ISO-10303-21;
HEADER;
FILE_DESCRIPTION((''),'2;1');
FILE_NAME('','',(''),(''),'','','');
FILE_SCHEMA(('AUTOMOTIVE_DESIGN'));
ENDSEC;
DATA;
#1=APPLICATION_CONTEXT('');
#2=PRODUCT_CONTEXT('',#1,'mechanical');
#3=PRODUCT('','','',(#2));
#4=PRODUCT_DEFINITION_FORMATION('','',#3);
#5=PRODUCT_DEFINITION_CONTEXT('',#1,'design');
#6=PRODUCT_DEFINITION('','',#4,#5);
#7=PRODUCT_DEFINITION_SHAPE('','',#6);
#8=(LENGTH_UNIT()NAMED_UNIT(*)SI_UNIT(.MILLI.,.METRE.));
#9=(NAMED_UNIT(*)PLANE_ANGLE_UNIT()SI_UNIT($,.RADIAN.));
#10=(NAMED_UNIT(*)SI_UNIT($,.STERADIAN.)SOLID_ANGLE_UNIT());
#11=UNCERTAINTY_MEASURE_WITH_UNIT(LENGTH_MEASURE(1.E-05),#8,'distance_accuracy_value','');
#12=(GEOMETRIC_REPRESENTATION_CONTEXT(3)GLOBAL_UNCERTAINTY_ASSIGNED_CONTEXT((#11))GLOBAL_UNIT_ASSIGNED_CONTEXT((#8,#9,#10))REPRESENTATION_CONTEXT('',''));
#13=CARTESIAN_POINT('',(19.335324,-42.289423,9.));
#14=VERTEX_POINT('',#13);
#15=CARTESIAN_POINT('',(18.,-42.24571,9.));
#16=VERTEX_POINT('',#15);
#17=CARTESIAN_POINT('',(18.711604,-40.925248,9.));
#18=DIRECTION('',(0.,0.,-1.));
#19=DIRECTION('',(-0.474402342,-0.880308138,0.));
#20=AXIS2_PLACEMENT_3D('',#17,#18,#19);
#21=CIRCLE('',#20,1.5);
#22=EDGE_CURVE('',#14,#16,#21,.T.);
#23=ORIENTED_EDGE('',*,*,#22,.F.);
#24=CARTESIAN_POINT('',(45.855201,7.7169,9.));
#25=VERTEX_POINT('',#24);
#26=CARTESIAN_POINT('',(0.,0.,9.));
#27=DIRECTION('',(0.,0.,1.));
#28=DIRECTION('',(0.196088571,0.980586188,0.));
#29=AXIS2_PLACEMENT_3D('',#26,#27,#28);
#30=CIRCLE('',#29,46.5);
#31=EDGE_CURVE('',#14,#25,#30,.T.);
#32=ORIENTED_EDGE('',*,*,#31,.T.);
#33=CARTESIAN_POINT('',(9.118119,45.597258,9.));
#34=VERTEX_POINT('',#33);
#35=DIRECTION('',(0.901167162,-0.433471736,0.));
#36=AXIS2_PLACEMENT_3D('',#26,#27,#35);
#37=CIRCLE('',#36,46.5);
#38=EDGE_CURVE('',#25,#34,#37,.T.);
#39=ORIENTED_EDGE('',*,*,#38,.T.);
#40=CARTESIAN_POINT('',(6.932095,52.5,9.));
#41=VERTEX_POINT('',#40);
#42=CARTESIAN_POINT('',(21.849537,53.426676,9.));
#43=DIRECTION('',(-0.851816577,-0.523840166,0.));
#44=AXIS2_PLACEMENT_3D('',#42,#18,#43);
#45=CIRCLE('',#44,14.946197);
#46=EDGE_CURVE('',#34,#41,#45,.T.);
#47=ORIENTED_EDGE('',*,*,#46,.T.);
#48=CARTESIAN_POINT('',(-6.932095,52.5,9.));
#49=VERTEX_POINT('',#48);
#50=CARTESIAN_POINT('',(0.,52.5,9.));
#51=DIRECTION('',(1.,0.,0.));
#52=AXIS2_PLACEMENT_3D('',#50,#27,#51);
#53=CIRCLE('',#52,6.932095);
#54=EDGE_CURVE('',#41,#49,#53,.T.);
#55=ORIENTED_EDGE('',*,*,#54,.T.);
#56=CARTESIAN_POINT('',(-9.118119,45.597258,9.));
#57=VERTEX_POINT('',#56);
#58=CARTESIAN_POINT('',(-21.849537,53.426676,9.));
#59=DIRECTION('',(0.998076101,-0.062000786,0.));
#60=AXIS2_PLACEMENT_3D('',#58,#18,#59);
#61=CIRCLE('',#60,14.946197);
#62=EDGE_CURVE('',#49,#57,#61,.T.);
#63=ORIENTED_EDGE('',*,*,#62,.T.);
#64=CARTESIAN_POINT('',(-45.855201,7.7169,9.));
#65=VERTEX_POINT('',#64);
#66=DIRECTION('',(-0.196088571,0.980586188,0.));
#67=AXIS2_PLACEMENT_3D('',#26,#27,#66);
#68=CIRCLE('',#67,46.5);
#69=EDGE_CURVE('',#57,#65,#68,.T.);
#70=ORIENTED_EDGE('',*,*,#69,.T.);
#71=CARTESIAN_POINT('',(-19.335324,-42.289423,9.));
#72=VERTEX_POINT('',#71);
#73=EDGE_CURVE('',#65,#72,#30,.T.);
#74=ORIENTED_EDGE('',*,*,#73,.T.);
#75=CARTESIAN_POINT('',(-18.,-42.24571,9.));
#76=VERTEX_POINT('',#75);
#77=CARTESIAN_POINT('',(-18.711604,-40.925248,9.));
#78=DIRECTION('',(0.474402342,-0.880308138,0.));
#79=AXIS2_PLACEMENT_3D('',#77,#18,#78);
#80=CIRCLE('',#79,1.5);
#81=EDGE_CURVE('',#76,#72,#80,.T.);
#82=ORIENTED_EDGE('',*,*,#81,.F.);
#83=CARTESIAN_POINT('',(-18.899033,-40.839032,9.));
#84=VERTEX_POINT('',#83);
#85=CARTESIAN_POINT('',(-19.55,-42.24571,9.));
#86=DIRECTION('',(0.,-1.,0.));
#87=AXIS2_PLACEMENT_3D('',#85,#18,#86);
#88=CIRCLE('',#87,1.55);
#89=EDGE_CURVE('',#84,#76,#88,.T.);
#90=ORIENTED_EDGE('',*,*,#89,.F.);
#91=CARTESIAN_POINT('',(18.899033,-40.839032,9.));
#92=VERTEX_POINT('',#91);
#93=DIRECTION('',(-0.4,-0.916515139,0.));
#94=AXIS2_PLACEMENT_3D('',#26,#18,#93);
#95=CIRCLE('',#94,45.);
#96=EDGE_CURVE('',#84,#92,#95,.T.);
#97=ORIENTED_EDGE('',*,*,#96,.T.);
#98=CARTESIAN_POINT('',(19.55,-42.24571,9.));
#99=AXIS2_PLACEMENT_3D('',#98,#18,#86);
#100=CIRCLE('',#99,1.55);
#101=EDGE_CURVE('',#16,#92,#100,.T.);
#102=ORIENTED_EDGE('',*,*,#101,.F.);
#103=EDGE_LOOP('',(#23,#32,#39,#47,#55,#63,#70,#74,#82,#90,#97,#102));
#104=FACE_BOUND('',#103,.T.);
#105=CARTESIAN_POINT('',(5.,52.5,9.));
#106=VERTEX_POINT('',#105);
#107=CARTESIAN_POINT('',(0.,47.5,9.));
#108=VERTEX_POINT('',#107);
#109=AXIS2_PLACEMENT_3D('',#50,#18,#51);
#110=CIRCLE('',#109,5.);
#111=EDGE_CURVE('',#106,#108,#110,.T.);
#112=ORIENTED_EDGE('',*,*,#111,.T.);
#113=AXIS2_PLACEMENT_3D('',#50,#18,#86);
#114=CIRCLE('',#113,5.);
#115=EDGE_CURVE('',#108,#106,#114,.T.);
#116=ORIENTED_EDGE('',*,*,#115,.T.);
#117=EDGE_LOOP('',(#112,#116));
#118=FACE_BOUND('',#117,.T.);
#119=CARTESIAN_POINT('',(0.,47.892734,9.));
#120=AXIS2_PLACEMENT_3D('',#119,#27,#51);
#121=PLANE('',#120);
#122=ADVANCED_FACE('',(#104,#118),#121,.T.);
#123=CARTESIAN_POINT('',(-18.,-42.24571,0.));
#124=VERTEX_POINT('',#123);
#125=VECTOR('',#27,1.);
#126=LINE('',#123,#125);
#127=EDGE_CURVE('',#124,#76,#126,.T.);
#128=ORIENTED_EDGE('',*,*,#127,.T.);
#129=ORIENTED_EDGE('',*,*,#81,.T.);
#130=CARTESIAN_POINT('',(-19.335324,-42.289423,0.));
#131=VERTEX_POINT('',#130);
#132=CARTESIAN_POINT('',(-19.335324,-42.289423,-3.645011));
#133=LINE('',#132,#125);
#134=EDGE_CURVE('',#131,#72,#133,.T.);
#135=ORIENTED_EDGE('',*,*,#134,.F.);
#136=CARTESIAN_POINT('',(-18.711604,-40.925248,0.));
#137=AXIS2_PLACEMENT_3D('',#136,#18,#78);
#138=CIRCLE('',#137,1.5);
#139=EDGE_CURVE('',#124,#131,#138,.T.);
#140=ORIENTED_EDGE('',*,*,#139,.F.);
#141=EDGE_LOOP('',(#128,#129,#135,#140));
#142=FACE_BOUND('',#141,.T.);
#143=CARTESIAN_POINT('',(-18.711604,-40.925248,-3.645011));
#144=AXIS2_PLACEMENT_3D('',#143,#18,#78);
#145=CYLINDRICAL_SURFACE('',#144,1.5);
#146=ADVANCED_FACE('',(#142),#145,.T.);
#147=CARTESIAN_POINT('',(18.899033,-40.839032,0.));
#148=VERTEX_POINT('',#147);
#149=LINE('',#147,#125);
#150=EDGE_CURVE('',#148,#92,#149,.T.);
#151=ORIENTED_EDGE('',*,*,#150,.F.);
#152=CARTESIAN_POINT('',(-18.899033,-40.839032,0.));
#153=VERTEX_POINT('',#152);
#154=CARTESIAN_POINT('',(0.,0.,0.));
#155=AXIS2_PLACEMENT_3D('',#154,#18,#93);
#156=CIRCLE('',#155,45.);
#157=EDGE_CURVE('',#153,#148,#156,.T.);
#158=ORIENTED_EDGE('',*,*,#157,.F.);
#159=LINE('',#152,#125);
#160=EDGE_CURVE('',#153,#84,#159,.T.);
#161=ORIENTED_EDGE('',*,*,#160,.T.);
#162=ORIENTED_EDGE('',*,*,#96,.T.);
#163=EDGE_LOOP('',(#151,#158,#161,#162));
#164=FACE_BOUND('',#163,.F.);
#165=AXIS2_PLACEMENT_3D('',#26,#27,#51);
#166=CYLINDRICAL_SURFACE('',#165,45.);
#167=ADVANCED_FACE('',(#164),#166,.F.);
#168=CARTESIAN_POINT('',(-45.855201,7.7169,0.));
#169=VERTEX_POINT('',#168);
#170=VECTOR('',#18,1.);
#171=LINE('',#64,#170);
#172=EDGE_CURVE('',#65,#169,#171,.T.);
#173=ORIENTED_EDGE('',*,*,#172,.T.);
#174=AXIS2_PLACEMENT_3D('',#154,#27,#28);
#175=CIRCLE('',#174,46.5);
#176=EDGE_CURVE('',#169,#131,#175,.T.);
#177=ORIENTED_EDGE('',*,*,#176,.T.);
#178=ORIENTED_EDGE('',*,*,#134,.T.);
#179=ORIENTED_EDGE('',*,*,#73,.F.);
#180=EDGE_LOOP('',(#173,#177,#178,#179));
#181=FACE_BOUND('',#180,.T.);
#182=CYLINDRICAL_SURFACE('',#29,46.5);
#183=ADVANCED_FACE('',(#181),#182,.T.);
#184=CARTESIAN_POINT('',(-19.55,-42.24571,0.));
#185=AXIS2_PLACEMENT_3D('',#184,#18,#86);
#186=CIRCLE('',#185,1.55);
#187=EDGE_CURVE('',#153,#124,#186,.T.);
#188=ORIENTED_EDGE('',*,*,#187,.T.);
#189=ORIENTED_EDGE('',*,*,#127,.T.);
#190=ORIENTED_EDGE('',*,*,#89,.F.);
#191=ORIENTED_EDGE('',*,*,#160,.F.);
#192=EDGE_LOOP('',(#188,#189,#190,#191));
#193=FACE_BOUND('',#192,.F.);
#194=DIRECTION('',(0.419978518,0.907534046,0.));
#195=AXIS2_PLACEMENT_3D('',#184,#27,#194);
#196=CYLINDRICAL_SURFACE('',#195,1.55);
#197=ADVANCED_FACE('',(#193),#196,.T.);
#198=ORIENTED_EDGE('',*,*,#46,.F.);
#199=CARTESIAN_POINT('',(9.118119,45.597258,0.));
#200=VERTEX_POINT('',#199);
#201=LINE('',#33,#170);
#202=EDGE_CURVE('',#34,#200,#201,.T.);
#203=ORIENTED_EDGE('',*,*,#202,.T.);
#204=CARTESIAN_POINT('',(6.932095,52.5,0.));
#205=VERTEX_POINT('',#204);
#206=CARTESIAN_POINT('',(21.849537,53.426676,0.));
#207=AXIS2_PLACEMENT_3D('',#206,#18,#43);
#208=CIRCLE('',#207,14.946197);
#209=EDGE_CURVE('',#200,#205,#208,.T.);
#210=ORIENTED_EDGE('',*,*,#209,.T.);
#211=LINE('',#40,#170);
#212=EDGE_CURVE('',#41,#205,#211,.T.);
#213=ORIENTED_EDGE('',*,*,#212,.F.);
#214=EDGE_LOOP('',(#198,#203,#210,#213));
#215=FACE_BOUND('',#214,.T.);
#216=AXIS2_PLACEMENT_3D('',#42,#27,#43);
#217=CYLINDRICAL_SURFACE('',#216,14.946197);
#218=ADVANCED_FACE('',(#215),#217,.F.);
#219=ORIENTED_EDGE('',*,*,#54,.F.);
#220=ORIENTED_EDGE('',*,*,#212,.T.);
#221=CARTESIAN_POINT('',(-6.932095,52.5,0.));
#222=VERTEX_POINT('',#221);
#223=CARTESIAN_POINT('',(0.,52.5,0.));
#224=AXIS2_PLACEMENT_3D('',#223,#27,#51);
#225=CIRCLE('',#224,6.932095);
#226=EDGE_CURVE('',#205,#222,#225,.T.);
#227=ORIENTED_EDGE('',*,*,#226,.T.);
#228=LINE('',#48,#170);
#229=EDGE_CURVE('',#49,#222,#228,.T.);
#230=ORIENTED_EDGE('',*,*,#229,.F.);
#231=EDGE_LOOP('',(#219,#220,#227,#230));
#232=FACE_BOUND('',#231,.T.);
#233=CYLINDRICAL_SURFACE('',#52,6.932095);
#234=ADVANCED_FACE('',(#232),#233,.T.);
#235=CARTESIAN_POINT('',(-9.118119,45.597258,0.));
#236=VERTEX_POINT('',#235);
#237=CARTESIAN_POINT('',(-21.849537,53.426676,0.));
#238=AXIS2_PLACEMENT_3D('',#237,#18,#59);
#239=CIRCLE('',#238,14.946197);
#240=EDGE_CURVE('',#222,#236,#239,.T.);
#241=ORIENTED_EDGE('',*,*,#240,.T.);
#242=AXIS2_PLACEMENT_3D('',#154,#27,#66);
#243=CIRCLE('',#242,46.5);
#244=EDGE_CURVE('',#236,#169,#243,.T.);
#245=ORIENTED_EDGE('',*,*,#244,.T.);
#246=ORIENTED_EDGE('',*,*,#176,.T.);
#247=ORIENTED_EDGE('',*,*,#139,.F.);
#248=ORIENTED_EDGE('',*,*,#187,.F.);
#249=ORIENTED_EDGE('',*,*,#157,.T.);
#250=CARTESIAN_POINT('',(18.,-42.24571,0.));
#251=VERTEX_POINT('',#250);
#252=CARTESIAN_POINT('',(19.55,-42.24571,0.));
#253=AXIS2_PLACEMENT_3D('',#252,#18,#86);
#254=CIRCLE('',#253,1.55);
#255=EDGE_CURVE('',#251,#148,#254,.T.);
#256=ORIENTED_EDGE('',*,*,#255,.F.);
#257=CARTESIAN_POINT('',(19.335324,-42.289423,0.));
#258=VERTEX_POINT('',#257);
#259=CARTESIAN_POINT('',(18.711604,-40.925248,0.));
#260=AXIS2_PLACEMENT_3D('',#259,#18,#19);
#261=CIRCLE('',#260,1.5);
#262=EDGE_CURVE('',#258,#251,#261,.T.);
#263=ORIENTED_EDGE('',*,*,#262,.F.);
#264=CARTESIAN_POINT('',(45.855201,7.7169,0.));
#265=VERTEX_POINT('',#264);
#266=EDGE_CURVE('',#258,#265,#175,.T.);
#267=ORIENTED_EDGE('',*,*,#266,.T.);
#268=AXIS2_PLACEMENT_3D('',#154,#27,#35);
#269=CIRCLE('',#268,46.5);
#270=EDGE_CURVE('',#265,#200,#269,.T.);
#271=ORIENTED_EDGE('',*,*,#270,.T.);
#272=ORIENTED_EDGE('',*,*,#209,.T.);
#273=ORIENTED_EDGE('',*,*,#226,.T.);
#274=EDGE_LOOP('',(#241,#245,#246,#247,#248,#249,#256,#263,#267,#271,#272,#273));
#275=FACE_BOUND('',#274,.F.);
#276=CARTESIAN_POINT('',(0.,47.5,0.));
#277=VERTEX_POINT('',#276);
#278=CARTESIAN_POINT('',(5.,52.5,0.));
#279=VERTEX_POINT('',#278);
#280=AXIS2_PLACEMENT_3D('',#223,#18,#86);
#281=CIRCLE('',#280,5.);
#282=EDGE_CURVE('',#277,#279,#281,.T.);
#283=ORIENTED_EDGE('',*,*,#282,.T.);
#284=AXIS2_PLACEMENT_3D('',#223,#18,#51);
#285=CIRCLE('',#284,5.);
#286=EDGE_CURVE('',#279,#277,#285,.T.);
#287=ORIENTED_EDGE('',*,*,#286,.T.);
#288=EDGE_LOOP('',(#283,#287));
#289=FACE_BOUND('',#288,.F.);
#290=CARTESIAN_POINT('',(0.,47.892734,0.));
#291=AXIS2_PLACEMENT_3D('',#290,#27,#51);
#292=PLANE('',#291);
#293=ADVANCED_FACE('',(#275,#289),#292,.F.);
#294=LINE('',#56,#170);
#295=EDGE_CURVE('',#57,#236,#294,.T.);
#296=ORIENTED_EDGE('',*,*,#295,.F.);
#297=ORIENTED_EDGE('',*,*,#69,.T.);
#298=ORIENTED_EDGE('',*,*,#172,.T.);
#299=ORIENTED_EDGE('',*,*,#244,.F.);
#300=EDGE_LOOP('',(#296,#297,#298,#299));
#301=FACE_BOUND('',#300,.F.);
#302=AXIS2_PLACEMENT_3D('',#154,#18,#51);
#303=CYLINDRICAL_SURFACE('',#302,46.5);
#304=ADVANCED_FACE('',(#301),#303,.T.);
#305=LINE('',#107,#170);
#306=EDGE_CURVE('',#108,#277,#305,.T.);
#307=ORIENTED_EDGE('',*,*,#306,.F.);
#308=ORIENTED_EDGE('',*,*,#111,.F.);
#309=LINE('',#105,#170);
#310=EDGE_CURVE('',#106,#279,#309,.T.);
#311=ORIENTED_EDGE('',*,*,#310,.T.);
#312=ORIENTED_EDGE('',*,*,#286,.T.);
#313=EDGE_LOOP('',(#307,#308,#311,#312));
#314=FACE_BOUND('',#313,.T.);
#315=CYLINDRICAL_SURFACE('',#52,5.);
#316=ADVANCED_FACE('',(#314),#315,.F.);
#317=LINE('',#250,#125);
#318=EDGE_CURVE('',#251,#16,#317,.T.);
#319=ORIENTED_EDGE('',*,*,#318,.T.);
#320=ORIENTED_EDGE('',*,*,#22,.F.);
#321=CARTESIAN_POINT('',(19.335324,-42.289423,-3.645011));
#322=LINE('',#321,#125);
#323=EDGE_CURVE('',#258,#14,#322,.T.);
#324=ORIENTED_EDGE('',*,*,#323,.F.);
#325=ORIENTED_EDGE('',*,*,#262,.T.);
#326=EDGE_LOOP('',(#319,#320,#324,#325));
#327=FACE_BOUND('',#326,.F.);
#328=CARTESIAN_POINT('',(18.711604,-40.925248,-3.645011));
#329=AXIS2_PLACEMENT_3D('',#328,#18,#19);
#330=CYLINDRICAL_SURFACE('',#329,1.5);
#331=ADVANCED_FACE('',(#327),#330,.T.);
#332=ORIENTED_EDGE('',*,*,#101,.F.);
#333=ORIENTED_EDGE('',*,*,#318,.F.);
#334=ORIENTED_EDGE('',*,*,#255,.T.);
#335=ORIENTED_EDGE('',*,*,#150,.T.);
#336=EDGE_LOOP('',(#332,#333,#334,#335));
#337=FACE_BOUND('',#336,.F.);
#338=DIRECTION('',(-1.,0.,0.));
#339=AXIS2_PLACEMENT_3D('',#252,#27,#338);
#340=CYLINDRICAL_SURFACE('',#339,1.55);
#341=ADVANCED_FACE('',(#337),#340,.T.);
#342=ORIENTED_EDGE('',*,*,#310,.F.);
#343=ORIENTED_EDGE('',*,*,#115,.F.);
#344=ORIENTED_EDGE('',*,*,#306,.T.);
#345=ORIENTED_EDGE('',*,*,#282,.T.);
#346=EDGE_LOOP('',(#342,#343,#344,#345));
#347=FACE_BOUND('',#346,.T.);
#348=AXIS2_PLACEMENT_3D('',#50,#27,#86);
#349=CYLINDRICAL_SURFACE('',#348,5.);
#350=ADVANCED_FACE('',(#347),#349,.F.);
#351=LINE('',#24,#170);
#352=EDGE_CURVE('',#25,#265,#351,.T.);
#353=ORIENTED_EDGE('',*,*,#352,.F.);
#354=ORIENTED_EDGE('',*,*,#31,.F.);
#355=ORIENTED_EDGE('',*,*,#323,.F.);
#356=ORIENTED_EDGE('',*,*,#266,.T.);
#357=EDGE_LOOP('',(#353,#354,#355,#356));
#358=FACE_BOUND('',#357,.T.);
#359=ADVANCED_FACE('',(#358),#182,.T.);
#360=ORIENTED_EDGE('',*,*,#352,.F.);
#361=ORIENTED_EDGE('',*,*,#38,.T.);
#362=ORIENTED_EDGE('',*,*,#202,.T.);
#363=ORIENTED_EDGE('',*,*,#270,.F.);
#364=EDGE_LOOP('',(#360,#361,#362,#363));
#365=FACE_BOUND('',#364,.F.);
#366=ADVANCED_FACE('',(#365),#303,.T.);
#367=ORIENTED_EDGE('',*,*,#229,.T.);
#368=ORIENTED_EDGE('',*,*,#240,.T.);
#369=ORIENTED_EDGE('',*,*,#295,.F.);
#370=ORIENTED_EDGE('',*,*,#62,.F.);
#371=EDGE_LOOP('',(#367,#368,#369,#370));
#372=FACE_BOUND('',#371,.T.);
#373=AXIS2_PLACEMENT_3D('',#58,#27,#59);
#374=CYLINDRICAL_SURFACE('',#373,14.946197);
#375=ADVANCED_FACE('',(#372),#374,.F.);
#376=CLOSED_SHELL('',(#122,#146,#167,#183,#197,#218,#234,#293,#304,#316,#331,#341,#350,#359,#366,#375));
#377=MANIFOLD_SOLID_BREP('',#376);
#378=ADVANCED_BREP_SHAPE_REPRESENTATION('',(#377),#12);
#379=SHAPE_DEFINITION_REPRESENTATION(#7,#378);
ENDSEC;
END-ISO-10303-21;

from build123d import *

# Parameters (mm, degrees)
F0_R         = 46.5
F0_R_2       = 45
F1_DEPTH     = 9
F3_DEPTH     = 25
F5_DEPTH     = 25
F7_DEPTH     = 9
F9_DEPTH     = 9
F11_DEPTH    = 9
F13_DEPTH    = 25
F15_DEPTH    = 25
F16_R        = 45
F17_DEPTH    = 9
F18_R        = 45
F19_DEPTH    = 25
F21_DEPTH    = 25
F22_R        = 1.55
F23_T1_DEPTH = 16.2900218994
F24_T1_DEPTH = 16.2900218994


# Not quite as in the source:
# - a fillet or chamfer that OpenCascade refuses, or shapes differently, is made with other operations: its cross-section is extruded or revolved along the edge and cut away or added


with BuildPart() as f1:
    # F0 (on Top) → F1 (new body)
    with BuildSketch(Plane.XY):
        Circle(F0_R)
        Circle(F0_R_2, mode=Mode.SUBTRACT)
    extrude(amount=F1_DEPTH)

    # F2 (on face) → F3 (cut)
    with BuildSketch(Plane.XY.offset(9)):
        Polygon((64.8135244846, -21.5104352683), (0, -21.5104352683), (-51.5724048018, -21.5104352683), (-51.5724048018, -59.9158406258), (64.033716917, -57.7713772655), align=None)
    extrude(amount=-F3_DEPTH, mode=Mode.SUBTRACT)

    # F4 (on face) → F5 (cut)
    with BuildSketch(Plane.XY.offset(9)):
        with BuildLine():
            ThreePointArc((-40.5525222975, -19.506228116), (-40.9032938672, -20.5072072896), (-41.9042730407, -20.1564357199))
            Line((-41.9042730407, -20.1564357199), (-43.4346050024, -22.7221362293))
            Line((-43.4346050024, -22.7221362293), (-36.3525599241, -23.4547629952))
            Line((-36.3525599241, -23.4547629952), (-40.5525222975, -19.506228116))
        make_face()
        with BuildLine():
            Line((43.4346050024, -22.7221362293), (41.9042730407, -20.1564357199))
            ThreePointArc((41.9042730407, -20.1564357199), (40.9032938672, -20.5072072896), (40.5525222975, -19.506228116))
            Line((40.5525222975, -19.506228116), (36.3525599241, -23.4547629952))
            Line((36.3525599241, -23.4547629952), (43.4346050024, -22.7221362293))
        make_face()
    extrude(amount=-F5_DEPTH, mode=Mode.SUBTRACT)

    # F6 (on face) → F7 (join)
    with BuildSketch(Plane.XY.offset(9)):
        with BuildLine():
            ThreePointArc((6.9320949163, 52.5), (-4.9017313232, 57.4017313232), (0, 45.5679050837))
            ThreePointArc((0, 45.5679050837), (4.9017313232, 47.5982686768), (6.9320949163, 52.5))
        make_face()
        with BuildLine():
            ThreePointArc((5, 52.5), (3.5355339059, 48.9644660941), (0, 47.5))
            ThreePointArc((0, 47.5), (-3.5355339059, 56.0355339059), (5, 52.5))
        make_face(mode=Mode.SUBTRACT)
    extrude(amount=-F7_DEPTH)

    # F8 (on face) → F9 (join)
    with BuildSketch(Plane.XY.offset(9)):
        with BuildLine():
            ThreePointArc((-6.9320949163, 52.5), (-7.6007884485, 48.9142518774), (-9.1181185374, 45.5972577502))
            ThreePointArc((-9.1181185374, 45.5972577502), (0, 45.60976302), (9.1181185374, 45.5972577502))
            ThreePointArc((9.1181185374, 45.5972577502), (7.6007884485, 48.9142518774), (6.9320949163, 52.5))
            ThreePointArc((6.9320949163, 52.5), (0, 47.0015761941), (-6.9320949163, 52.5))
        make_face()
    extrude(amount=-F9_DEPTH)

    # F10 (on face) → F11 (join)
    with BuildSketch(Plane.XY.offset(9)):
        with BuildLine():
            Line((-44.8310511788, 3.895747708), (-46.3451584316, 3.7916078319))
            ThreePointArc((-46.3451584316, 3.7916078319), (-42.7926175487, -9.5215818837), (-33.8443815708, -19.9996847659))
            ThreePointArc((-33.8443815708, -19.9996847659), (-32.8631083129, -20.2138563114), (-32.1503467858, -19.506228116))
            ThreePointArc((-32.1503467858, -19.506228116), (-41.2777702931, -9.315455738), (-44.8310511788, 3.895747708))
        make_face()
        with BuildLine():
            ThreePointArc((33.8443815708, -19.9996847659), (42.7926175487, -9.5215818837), (46.3451584316, 3.7916078319))
            Line((46.3451584316, 3.7916078319), (44.8310511788, 3.895747708))
            ThreePointArc((44.8310511788, 3.895747708), (41.2777702931, -9.315455738), (32.1503467858, -19.506228116))
            ThreePointArc((32.1503467858, -19.506228116), (32.8631083129, -20.2138563114), (33.8443815708, -19.9996847659))
        make_face()
    extrude(amount=-F11_DEPTH)

    # F12 (on face) → F13 (cut)
    with BuildSketch(Plane.XY.offset(9)):
        with BuildLine():
            ThreePointArc((-44.7172397739, -5.0367119241), (-45.830770977, -0.896267065), (-46.3787269492, 3.35614162))
            Line((-46.3787269492, 3.35614162), (-53.9689548314, -20.3920416534))
            Line((-53.9689548314, -20.3920416534), (-39.6306179464, -26.7084874213))
            Line((-39.6306179464, -26.7084874213), (-35.9670780599, -21.9711512327))
            Line((-35.9670780599, -21.9711512327), (-43.2941578329, -10.1593965665))
            Line((-43.2941578329, -10.1593965665), (-44.7172397739, -5.0367119241))
        make_face()
        with BuildLine():
            Line((53.9689548314, -20.3920416534), (46.3787269492, 3.35614162))
            ThreePointArc((46.3787269492, 3.35614162), (45.830770977, -0.896267065), (44.7172397739, -5.0367119241))
            Line((44.7172397739, -5.0367119241), (43.2941578329, -10.1593965665))
            Line((43.2941578329, -10.1593965665), (35.9670780599, -21.9711512327))
            Line((35.9670780599, -21.9711512327), (39.6306179464, -26.7084874213))
            Line((39.6306179464, -26.7084874213), (53.9689548314, -20.3920416534))
        make_face()
    extrude(amount=-F13_DEPTH, mode=Mode.SUBTRACT)

    # F14 (on face) → F15 (cut)
    with BuildSketch(Plane.XY.offset(9)):
        with BuildLine():
            ThreePointArc((-45.7581778434, -1.2523031469), (-46.1397679432, 3.2286956321), (-45.8552008738, 7.7169004675))
            ThreePointArc((-45.8552008738, 7.7169004675), (-48.5264373147, 3.20287819), (-45.7581778434, -1.2523031469))
        make_face()
        with BuildLine():
            ThreePointArc((45.7581778434, -1.2523031469), (48.5264373147, 3.20287819), (45.8552008738, 7.7169004675))
            ThreePointArc((45.8552008738, 7.7169004675), (46.1397679432, 3.2286956321), (45.7581778434, -1.2523031469))
        make_face()
    extrude(amount=-F15_DEPTH, mode=Mode.SUBTRACT)

    # F16 (on face) → F17 (join)
    with BuildSketch(Plane.XY.offset(9)):
        with BuildLine():
            ThreePointArc((-9.1181185374, 45.5972577502), (0, -46.5), (9.1181185374, 45.5972577502))
            ThreePointArc((9.1181185374, 45.5972577502), (0, 46.5), (-9.1181185374, 45.5972577502))
        make_face()
        Circle(F16_R, mode=Mode.SUBTRACT)
    extrude(amount=-F17_DEPTH)

    # F18 (on face) → F19 (cut)
    with BuildSketch(Plane.XY.offset(9)):
        Circle(F18_R)
    extrude(amount=-F19_DEPTH, mode=Mode.SUBTRACT)

    # F20 (on face) → F21 (cut)
    with BuildSketch(Plane.XY.offset(9)):
        Polygon((18, 0), (0, 0), (-18, 0), (-18, -69.9843019247), (18, -69.3941116333), align=None)
    extrude(amount=-F21_DEPTH, mode=Mode.SUBTRACT)

    # F22
    f22_edges = [f1.edges().sort_by_distance(p)[0] for p in [
        (-18, -41.243181, 4.5),
        (18, -41.243181, 4.5),
    ]]
    fillet(f22_edges, radius=F22_R)

    # F23: fillet of radius 1.5 on 1 edges, made by hand

    # F23_s2 → F23_t1 (cut)
    with BuildSketch(Plane.XY.offset(-3.6450109497)):
        with BuildLine():
            ThreePointArc((18, -42.2457098414), (18.6625262969, -42.4244445619), (19.3353236307, -42.2894225557))
            ThreePointArc((19.3353236307, -42.2894225557), (18.6699563348, -42.5873541143), (18, -42.8748177839))
            Line((18, -42.8748177839), (18, -42.2457098414))
        make_face()
    extrude(amount=F23_T1_DEPTH, mode=Mode.SUBTRACT)

    # F24: fillet of radius 1.5 on 1 edges, made by hand

    # F24_s2 → F24_t1 (cut)
    with BuildSketch(Plane.XY.offset(-3.6450109497)):
        with BuildLine():
            ThreePointArc((-18, -42.2457098414), (-18.6625262969, -42.4244445619), (-19.3353236307, -42.2894225557))
            ThreePointArc((-19.3353236307, -42.2894225557), (-18.6699563348, -42.5873541143), (-18, -42.8748177839))
            Line((-18, -42.8748177839), (-18, -42.2457098414))
        make_face()
    extrude(amount=F24_T1_DEPTH, mode=Mode.SUBTRACT)


solid = f1.part
